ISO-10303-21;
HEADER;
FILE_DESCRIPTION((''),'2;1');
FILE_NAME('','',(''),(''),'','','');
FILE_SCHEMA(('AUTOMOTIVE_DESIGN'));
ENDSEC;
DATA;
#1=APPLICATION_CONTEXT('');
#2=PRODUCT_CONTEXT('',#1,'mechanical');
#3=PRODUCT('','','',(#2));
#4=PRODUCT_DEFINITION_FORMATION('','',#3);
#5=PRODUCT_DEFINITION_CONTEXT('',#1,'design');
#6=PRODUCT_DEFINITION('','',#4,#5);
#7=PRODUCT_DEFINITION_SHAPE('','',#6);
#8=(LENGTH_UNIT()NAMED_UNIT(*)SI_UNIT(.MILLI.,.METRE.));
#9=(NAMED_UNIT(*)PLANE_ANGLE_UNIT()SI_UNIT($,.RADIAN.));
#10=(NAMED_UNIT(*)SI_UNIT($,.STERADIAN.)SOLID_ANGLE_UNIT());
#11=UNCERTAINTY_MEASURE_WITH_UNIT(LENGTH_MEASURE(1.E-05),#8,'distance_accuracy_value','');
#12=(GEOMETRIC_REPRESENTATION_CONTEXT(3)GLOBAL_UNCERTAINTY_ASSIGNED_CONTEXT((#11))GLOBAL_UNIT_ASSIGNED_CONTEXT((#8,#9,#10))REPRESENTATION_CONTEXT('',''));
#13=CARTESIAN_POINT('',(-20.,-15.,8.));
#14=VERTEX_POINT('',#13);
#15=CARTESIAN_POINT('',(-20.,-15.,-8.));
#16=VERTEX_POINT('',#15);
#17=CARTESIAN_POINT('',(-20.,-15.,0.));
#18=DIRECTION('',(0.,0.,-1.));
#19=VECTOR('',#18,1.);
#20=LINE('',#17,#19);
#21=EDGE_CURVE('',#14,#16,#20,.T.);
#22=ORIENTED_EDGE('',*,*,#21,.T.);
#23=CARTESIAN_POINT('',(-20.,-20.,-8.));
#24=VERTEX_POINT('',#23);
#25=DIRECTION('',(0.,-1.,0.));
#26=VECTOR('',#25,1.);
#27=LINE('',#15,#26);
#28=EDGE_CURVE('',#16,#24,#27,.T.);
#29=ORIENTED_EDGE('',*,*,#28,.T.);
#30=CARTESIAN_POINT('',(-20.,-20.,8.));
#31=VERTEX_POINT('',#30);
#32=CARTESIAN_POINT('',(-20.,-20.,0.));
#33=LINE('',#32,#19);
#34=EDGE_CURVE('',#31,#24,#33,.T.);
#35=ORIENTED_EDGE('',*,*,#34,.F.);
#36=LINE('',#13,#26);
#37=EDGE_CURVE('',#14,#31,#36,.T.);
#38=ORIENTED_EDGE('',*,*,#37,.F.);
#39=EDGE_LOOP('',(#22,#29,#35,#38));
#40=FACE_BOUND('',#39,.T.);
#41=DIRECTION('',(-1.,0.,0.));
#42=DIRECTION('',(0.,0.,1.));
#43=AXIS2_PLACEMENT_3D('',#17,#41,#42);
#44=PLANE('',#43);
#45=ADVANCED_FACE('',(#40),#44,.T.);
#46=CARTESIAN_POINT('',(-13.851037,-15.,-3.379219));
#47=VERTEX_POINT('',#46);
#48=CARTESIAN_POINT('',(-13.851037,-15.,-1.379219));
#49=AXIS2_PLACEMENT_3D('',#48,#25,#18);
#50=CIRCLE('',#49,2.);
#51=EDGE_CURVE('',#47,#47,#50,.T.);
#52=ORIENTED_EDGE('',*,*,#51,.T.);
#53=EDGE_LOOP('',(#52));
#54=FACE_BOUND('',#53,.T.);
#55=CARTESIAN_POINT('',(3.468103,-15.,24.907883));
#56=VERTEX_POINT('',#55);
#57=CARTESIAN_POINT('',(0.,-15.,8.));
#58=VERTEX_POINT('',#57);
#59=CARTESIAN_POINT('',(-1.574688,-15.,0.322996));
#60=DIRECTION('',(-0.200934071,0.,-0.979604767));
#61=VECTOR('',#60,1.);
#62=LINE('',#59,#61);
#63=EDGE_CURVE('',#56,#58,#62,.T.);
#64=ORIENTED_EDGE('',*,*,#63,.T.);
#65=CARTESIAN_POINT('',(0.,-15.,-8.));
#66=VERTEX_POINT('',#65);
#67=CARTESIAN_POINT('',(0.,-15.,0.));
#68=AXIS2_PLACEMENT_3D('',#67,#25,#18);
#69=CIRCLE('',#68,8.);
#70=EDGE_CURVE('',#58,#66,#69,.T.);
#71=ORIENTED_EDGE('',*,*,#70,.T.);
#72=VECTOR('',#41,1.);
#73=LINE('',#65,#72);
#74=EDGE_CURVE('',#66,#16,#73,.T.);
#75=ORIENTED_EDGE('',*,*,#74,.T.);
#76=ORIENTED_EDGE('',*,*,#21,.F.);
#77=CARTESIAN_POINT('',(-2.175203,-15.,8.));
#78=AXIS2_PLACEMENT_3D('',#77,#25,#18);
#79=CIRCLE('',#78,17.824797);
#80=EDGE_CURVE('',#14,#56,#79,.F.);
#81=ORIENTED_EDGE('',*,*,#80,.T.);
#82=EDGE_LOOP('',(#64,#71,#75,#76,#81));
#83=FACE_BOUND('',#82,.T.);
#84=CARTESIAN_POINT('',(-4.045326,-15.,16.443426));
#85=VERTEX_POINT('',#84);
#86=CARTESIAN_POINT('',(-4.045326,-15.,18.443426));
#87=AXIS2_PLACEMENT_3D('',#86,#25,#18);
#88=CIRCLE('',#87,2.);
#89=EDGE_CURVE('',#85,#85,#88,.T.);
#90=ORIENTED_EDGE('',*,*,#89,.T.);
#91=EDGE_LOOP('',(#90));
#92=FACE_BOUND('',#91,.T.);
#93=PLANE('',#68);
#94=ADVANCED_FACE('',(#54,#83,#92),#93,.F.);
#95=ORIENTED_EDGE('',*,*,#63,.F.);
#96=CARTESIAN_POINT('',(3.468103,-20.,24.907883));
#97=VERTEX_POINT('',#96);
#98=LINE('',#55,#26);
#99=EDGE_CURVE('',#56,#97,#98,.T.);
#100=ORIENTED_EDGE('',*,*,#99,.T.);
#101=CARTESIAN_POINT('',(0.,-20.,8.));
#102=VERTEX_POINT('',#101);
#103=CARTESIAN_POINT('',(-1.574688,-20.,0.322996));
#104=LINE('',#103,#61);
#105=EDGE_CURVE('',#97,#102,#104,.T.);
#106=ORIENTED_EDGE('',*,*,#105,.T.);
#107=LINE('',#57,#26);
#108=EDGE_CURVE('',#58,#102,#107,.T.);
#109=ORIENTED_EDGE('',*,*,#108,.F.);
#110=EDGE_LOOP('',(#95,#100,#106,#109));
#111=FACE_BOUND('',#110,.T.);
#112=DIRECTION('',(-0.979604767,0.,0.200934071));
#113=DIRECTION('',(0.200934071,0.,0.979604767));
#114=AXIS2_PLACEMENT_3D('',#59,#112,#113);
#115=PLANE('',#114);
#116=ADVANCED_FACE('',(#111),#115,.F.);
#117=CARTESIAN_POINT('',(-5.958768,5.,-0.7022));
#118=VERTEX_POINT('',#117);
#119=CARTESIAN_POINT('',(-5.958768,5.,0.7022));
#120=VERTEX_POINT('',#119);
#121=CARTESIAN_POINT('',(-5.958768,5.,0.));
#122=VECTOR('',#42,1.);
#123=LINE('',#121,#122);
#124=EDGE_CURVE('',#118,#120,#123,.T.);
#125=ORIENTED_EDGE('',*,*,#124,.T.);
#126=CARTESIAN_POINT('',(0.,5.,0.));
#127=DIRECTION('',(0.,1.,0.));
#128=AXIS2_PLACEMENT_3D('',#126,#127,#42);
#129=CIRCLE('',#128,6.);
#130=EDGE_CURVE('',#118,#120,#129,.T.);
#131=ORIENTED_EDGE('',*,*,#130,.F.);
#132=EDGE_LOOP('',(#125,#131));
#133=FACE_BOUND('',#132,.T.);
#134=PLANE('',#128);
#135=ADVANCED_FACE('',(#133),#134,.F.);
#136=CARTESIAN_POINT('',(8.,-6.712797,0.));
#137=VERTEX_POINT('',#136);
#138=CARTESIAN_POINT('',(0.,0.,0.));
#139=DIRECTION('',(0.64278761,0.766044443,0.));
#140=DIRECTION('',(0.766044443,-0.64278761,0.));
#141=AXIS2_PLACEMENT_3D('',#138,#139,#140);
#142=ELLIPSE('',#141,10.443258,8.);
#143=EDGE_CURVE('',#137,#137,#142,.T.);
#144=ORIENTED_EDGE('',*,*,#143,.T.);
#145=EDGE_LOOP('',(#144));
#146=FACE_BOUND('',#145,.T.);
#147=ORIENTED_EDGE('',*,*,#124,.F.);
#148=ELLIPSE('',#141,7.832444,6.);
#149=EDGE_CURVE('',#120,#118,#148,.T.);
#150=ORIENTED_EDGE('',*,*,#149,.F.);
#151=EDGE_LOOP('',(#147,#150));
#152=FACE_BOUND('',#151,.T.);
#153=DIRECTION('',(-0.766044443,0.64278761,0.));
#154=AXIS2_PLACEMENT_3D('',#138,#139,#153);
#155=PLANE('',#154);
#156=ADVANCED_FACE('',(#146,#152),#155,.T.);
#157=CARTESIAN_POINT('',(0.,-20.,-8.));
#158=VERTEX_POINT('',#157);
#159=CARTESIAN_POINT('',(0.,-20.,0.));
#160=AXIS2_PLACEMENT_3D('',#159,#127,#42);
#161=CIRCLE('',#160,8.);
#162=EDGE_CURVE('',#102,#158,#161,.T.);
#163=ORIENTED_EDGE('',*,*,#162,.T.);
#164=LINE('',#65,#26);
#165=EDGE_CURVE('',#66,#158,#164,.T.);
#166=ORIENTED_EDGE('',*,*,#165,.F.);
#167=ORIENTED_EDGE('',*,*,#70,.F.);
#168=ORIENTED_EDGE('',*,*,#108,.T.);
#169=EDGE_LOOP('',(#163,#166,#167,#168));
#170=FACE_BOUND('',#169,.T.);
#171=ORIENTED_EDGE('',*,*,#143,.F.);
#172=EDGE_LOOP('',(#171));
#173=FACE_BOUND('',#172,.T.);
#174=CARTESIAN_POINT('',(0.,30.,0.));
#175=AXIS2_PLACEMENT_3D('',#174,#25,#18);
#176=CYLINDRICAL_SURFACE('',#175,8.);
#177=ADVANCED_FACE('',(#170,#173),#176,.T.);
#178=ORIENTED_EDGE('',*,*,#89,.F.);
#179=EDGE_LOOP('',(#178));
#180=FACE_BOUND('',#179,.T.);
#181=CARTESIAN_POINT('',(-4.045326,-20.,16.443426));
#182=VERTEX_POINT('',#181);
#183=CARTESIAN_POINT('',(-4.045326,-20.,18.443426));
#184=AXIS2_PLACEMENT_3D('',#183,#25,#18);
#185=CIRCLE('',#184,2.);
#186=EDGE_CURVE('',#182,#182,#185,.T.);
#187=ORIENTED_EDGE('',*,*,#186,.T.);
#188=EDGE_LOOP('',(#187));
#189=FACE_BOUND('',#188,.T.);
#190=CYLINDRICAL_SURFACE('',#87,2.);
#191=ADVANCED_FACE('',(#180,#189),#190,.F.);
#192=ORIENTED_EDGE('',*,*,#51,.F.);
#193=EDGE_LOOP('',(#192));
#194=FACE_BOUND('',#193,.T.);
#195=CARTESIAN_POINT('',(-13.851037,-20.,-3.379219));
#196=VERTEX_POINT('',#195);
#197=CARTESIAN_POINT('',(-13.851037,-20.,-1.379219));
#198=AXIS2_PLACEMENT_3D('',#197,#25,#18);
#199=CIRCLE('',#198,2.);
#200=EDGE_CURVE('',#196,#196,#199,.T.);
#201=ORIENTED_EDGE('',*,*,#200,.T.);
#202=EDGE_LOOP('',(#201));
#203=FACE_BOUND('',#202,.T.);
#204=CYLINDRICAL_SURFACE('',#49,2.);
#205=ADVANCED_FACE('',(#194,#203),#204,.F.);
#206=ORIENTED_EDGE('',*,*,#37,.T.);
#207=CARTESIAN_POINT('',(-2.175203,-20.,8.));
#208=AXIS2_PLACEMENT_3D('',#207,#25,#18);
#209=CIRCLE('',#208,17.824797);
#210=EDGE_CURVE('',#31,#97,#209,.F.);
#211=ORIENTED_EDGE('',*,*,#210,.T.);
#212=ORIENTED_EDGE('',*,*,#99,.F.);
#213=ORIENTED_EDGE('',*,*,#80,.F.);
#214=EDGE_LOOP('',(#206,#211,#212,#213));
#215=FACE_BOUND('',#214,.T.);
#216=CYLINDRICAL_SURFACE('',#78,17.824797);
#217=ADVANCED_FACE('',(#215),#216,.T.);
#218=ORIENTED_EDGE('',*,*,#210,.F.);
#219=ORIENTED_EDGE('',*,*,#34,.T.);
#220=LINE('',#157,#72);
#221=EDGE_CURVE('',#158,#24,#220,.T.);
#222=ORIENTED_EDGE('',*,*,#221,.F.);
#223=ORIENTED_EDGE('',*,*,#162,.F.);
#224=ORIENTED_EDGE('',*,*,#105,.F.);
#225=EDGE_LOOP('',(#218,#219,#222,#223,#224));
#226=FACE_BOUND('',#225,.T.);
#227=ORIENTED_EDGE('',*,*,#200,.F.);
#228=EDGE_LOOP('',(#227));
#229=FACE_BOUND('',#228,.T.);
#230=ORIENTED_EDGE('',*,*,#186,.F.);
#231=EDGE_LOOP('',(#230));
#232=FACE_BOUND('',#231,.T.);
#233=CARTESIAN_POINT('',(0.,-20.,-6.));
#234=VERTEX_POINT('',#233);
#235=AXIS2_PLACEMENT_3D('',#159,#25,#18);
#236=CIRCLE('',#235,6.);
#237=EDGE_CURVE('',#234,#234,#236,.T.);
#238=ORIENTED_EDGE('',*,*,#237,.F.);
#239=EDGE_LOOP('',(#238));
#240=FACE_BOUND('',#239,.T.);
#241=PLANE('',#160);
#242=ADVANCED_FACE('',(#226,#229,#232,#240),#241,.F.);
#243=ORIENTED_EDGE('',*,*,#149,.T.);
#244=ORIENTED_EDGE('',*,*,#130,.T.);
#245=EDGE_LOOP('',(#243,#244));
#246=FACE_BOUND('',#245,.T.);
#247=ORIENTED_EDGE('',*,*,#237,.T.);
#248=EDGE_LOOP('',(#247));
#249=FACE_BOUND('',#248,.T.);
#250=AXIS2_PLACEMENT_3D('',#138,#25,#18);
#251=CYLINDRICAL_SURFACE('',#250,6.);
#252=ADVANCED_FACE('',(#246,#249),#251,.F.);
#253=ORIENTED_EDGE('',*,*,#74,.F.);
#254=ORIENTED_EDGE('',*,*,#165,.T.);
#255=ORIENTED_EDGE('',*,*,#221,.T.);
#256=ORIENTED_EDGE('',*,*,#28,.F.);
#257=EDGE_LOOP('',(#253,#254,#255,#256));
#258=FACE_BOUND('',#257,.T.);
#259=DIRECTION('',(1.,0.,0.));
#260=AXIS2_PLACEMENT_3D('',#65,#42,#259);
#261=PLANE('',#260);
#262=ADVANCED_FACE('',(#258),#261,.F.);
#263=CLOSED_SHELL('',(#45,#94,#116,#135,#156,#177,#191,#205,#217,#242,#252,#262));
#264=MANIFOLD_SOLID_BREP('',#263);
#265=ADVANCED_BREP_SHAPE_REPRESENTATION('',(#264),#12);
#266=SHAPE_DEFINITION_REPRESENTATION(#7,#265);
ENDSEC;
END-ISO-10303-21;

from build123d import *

# Parameters (mm, degrees)
BOSS_EXTRUDE1_DEPTH      = 30
BOSS_EXTRUDE1_DEPTH_BACK = 20
SKETCH1_R                = 8
SKETCH1_4_R              = 6
SKETCH2_R                = 6
SKETCH1_5_R              = 6
CUT_EXTRUDE1_DEPTH       = 5
BOSS_EXTRUDE3_START      = -5
BOSS_EXTRUDE3_OUTLINE_R  = 2
BOSS_EXTRUDE3_DEPTH      = 5


# Read off the part's stored shape, not the designer's step: Boss-Extrude3
with BuildPart() as part:
    # Sketch1 → Boss-Extrude1 (new, two sides: drawn at the far end of the back side and taken through both)
    with BuildSketch(Plane(origin=(0, 0, 0), x_dir=(1, 0, 0), z_dir=(0, 1, 0)).offset(-BOSS_EXTRUDE1_DEPTH_BACK)):
        with Locations(Location((0, 0, 0), (0, 0, 270))):
            Circle(SKETCH1_R)
    extrude(amount=BOSS_EXTRUDE1_DEPTH + BOSS_EXTRUDE1_DEPTH_BACK)

    # SurfaceCut1
    split(bisect_by=Plane(origin=(0, 0, 0), x_dir=(0, 0, -1), z_dir=(0.6427876096865405, 0.766044443118977, -2.2049215546234306e-15)), keep=Keep.BOTTOM)

    # Sketch1<4> → Cut-Loft1 section 0
    with BuildSketch(Plane(origin=(0, 0, 0), x_dir=(1, 0, 0), z_dir=(0, 1, 0))):
        Circle(SKETCH1_4_R)
    # Sketch2 → Cut-Loft1 section 1
    with BuildSketch(Plane.XZ.offset(20)):
        Circle(SKETCH2_R)
    loft(mode=Mode.SUBTRACT)

    # Sketch1<5> → Cut-Extrude1 (cut)
    with BuildSketch(Plane(origin=(0, 0, 0), x_dir=(1, 0, 0), z_dir=(0, 1, 0))):
        with Locations(Location((0, 0, 0), (0, 0, 90))):
            Circle(SKETCH1_5_R)
    extrude(amount=CUT_EXTRUDE1_DEPTH, mode=Mode.SUBTRACT)

    # Boss-Extrude3 outline → Boss-Extrude3 (add)
    with BuildSketch(Plane.XZ.offset(20).offset(BOSS_EXTRUDE3_START)):
        with BuildLine():
            Line((-20, -8), (0, -8))
            ThreePointArc((0, -8), (-8, 0), (0, 8))
            Line((0, 8), (3.468102534, 24.907883087))
            ThreePointArc((3.468102534, 24.907883087), (-12.594718707, 22.462264233), (-20, 8))
            Line((-20, 8), (-20, -8))
        make_face()
        with Locations((-13.851036571, -1.379219301)):
            Circle(BOSS_EXTRUDE3_OUTLINE_R, mode=Mode.SUBTRACT)
        with Locations((-4.045326452, 18.443425538)):
            Circle(BOSS_EXTRUDE3_OUTLINE_R, mode=Mode.SUBTRACT)
    extrude(amount=BOSS_EXTRUDE3_DEPTH)


solid = part.part
